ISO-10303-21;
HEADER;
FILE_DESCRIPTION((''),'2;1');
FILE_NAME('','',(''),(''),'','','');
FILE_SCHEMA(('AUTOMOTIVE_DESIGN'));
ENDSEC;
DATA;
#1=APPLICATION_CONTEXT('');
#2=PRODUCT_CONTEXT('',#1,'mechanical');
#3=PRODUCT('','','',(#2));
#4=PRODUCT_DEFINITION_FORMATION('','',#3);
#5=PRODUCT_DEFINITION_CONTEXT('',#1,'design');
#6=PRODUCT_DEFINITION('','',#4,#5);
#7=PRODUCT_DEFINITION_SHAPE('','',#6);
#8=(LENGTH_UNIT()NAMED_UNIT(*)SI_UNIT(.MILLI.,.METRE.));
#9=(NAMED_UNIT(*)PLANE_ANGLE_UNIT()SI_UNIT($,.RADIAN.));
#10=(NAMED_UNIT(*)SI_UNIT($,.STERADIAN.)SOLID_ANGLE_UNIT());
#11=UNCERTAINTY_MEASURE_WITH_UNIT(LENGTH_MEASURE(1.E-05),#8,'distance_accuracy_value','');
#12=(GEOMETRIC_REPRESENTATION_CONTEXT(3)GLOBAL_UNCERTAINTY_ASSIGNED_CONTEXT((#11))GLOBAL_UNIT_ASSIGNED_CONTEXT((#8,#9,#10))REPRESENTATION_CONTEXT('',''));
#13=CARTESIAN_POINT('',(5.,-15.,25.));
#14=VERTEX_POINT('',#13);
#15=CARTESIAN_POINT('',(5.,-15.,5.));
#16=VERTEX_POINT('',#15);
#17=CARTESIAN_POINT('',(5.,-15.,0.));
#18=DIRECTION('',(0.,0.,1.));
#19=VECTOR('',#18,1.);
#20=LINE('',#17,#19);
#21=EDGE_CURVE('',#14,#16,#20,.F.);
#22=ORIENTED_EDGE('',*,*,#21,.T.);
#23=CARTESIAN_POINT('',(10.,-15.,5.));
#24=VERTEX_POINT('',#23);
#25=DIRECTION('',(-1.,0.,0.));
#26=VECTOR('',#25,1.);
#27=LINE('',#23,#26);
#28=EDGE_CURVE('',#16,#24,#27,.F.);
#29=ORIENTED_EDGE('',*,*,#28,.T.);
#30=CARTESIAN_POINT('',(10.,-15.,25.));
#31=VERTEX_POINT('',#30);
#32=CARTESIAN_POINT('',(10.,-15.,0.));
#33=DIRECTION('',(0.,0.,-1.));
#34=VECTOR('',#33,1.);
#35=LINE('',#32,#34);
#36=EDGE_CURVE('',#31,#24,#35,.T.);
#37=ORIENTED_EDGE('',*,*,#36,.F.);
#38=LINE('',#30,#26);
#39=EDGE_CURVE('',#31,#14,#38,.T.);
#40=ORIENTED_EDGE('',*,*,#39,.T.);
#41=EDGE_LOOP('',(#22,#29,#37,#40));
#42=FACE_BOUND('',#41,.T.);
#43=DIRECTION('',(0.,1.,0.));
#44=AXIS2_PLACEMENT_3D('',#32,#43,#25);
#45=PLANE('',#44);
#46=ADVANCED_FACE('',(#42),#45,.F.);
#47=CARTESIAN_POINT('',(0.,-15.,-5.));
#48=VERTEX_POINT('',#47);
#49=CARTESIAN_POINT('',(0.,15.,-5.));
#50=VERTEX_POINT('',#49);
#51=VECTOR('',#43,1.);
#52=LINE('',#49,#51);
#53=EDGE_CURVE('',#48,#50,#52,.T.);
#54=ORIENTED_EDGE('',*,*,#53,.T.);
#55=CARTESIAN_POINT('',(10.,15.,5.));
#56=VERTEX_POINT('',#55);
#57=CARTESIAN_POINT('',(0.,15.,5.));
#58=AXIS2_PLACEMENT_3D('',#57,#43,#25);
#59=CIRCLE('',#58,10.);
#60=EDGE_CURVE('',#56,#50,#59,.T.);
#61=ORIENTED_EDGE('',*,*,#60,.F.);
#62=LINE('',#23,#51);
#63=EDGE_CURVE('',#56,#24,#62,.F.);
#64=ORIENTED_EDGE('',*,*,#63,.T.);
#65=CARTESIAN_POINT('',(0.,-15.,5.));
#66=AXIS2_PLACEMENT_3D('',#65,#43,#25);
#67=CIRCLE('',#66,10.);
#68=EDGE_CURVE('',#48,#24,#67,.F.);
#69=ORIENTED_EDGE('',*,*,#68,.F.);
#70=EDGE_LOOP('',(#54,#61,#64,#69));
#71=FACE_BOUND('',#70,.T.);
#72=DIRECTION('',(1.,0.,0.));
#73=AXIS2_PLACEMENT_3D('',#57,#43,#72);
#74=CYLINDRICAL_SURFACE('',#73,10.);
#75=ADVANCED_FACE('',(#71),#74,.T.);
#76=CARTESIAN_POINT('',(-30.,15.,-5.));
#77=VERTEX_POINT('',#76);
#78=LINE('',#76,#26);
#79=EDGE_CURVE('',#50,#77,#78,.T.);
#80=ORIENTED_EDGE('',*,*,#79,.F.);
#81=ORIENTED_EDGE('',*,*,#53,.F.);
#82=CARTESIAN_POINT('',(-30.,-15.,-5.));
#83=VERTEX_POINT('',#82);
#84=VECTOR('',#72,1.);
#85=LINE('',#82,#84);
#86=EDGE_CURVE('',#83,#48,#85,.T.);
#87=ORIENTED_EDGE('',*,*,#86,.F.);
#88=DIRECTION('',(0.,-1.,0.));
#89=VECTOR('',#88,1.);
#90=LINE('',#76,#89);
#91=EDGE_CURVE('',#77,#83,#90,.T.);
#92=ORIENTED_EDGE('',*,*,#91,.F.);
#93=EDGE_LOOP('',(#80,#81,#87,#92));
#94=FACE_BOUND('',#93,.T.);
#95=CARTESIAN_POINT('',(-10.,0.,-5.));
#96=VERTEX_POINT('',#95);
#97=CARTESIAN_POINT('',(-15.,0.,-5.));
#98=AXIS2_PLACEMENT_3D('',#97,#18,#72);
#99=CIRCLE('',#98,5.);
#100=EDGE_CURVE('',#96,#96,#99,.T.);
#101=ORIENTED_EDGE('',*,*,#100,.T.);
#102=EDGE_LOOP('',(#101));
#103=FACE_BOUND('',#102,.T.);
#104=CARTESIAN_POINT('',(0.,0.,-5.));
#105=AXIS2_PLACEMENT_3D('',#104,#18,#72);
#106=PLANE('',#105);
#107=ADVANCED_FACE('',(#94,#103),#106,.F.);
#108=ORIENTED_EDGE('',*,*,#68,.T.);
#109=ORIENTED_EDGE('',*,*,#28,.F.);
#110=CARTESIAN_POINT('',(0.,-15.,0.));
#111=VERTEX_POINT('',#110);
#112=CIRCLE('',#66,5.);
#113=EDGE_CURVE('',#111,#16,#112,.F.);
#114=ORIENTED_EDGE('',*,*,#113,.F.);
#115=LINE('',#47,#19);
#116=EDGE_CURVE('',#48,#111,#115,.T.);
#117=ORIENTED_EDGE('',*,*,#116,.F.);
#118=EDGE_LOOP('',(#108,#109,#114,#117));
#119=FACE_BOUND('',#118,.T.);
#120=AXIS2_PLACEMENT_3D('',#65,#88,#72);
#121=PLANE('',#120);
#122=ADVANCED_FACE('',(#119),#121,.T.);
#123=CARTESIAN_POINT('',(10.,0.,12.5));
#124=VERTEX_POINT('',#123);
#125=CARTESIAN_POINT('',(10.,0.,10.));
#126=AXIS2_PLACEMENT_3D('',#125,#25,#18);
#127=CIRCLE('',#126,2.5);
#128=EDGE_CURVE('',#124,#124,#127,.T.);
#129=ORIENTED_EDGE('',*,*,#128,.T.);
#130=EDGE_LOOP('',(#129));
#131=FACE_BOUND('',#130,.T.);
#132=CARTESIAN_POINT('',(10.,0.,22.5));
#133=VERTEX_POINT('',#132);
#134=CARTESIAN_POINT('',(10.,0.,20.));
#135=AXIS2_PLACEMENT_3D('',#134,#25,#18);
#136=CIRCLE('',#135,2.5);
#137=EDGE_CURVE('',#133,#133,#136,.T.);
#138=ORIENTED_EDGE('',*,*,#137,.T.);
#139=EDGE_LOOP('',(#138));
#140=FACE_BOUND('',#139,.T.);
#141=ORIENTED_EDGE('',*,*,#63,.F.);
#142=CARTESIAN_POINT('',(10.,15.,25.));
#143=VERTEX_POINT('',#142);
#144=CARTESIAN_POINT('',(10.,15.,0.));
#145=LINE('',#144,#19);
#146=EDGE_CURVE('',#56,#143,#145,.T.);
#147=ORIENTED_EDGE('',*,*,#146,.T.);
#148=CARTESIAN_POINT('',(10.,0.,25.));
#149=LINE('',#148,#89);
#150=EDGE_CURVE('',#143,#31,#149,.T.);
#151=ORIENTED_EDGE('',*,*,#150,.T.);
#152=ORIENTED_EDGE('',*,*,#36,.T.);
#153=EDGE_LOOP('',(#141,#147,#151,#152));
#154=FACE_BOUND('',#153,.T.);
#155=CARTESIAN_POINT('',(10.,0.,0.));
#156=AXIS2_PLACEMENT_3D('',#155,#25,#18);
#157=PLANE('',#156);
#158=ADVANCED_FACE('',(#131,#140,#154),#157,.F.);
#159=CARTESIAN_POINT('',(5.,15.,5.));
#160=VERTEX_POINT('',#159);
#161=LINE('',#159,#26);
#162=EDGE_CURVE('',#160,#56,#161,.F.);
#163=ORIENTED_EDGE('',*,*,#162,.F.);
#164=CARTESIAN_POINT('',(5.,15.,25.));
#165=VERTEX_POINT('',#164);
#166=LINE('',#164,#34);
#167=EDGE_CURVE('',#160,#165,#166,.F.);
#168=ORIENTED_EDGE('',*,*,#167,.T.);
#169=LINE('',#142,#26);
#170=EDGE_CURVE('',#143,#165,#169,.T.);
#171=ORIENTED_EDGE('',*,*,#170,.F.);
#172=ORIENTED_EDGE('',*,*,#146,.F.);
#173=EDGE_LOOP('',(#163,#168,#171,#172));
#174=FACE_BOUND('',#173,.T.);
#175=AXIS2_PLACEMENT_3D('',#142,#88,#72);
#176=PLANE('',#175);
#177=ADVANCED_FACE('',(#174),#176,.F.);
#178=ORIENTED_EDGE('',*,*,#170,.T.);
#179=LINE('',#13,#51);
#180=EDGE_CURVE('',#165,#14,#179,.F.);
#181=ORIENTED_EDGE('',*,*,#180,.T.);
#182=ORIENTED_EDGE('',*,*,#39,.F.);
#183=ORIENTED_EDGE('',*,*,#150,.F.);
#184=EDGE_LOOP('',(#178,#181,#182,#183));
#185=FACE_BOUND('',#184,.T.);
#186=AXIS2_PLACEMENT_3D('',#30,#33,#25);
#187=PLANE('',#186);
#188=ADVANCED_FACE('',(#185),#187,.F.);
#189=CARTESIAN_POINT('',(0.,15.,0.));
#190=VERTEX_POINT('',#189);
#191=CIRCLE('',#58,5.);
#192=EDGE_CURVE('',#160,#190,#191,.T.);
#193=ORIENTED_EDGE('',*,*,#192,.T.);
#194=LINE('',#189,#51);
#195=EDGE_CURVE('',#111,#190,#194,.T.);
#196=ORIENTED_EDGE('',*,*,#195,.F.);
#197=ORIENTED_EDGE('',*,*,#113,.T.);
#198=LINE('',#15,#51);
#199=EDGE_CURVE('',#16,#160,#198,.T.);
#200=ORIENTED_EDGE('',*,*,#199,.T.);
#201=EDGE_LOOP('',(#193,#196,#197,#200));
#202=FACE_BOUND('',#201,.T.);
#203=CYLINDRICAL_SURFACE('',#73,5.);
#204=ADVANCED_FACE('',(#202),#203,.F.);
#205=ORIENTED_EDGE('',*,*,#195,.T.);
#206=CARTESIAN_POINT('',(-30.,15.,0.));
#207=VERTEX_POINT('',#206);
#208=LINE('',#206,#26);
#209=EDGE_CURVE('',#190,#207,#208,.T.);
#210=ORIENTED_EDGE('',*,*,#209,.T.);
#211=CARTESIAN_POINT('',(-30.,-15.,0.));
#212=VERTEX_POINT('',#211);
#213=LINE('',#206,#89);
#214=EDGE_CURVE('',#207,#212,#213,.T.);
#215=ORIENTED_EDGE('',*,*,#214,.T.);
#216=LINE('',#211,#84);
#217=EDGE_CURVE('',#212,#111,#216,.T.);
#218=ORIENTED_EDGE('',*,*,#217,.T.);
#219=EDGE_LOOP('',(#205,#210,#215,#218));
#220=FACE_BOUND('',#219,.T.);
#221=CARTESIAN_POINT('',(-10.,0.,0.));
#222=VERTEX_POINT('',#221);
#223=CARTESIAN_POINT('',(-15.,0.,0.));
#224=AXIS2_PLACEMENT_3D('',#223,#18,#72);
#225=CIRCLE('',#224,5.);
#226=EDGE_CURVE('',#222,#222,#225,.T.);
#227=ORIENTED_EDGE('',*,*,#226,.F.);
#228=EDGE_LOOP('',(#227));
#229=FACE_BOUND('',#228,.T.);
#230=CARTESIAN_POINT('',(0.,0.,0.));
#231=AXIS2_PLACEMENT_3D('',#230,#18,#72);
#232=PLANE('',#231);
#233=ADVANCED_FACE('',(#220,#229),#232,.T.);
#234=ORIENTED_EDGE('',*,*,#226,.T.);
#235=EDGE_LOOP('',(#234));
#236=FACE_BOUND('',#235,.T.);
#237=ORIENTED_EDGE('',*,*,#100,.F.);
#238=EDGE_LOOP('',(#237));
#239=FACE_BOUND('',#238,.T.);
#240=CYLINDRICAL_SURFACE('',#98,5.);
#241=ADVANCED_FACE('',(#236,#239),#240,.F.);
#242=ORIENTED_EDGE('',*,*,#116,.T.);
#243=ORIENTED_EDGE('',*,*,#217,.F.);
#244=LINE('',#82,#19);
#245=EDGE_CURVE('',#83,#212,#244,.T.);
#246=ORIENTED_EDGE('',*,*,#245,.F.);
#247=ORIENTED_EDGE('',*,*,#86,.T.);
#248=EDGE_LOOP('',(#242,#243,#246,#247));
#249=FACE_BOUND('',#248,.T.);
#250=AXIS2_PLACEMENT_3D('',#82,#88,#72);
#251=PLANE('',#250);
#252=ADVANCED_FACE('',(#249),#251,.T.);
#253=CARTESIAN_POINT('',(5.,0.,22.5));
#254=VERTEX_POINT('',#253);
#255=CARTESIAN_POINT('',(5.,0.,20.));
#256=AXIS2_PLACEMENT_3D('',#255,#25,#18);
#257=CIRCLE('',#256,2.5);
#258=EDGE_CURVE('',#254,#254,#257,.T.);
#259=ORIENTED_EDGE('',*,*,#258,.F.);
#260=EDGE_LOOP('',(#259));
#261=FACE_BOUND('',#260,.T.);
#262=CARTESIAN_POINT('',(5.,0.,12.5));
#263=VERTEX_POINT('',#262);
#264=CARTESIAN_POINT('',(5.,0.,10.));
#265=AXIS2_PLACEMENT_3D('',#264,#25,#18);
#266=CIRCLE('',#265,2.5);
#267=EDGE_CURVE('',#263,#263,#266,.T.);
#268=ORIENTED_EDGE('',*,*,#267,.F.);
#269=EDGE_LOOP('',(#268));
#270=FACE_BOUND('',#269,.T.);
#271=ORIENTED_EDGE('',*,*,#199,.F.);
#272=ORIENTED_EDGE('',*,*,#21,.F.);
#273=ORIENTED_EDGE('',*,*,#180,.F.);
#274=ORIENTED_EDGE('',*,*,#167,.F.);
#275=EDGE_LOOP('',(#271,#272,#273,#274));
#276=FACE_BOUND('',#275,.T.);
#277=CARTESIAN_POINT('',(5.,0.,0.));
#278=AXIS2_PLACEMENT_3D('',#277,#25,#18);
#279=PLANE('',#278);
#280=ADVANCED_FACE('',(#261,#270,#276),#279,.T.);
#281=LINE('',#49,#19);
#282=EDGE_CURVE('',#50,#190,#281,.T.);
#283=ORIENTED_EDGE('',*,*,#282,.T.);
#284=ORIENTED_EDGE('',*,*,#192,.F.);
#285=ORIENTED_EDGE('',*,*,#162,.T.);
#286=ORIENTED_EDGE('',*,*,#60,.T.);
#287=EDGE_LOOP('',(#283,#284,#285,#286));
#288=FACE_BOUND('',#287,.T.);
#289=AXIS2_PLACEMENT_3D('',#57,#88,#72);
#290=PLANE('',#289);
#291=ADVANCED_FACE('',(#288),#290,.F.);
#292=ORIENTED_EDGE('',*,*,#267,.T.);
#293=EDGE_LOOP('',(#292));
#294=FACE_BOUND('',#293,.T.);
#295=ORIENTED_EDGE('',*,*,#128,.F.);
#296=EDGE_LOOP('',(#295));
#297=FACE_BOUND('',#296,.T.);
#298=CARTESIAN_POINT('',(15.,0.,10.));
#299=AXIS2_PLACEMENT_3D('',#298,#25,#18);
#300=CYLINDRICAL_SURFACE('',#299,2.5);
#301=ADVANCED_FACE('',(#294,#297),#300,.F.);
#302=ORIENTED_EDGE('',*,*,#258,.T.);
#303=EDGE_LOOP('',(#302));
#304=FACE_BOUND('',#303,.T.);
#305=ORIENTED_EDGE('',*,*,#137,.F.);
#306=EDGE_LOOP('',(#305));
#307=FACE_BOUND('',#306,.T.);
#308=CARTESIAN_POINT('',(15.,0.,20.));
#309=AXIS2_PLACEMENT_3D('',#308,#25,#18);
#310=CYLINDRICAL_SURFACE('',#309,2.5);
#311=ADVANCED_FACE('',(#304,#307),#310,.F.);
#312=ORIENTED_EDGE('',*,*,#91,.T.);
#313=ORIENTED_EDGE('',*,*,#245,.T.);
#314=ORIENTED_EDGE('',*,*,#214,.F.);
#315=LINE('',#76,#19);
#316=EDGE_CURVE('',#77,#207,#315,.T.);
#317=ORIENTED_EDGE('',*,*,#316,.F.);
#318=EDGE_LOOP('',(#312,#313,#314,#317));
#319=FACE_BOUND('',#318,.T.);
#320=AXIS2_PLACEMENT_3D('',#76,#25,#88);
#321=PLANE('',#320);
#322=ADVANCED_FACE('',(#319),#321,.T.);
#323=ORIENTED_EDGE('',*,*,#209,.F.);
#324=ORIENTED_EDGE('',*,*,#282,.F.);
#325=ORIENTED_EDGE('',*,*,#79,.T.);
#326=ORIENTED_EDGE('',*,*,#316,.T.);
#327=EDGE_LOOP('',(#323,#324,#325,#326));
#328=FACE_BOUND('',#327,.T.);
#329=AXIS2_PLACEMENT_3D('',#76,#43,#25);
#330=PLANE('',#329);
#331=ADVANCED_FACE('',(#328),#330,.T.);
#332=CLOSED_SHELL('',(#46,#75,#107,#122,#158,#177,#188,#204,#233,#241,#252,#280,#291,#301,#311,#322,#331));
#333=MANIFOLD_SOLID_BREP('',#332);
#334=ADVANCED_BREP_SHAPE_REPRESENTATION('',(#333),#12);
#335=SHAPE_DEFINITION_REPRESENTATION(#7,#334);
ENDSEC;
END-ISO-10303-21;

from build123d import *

# Parameters (mm, degrees)
SKETCH1_W          = 30
SKETCH1_H          = 30
BASE_FLANGE1_DEPTH = 5
SKETCH6_R          = 5
CUT_EXTRUDE1_DEPTH = 34.911649916
EDGE_FLANGE1_DEPTH = 30
HOLE1_START        = 5
HOLE1_OUTLINE_R    = 2.5
HOLE1_DEPTH        = 5
LPATTERN1_COUNT    = 2
LPATTERN1_PITCH    = 10


# Read off the part's stored shape, not the designer's step: Hole1
# Sheet-metal steps are written as plain solids
with BuildPart() as part:
    # Sketch1 → Base-Flange1 (new body)
    with BuildSketch(Plane.XY):
        with Locations((-15, 0)):
            Rectangle(SKETCH1_W, SKETCH1_H)
    extrude(amount=-BASE_FLANGE1_DEPTH)

    # Sketch6 → Cut-Extrude1 (cut, through all)
    with BuildSketch(Plane.XY):
        with Locations((-15, 0)):
            Circle(SKETCH6_R)
    extrude(amount=-CUT_EXTRUDE1_DEPTH, mode=Mode.SUBTRACT)

    # Edge-Flange1 section (across the edge) → Edge-Flange1 (add)
    with BuildSketch(Plane(origin=(5, -15, 0), x_dir=(-1, 0, 0), z_dir=(0, 1, 0))):
        with BuildLine():
            Line((-5, 5), (-5, 25))
            Line((-5, 25), (0, 25))
            Line((0, 25), (0, 5))
            ThreePointArc((0, 5), (1.464466094, 1.464466094), (5, 0))
            Line((5, 0), (5, -5))
            ThreePointArc((5, -5), (-2.071067812, -2.071067812), (-5, 5))
        make_face()
    extrude(amount=EDGE_FLANGE1_DEPTH)

    # Hole1 outline → Hole1 (cut)
    with BuildSketch(Plane.YZ.offset(HOLE1_START)):
        with Locations((0, 10)):
            Circle(HOLE1_OUTLINE_R)
    hole1 = extrude(amount=HOLE1_DEPTH, mode=Mode.SUBTRACT)

    # LPattern1: Hole1 ×2
    with Locations(*[(0, 0, i * LPATTERN1_PITCH) for i in range(1, LPATTERN1_COUNT)]):
        add(hole1, mode=Mode.SUBTRACT)


solid = part.part
